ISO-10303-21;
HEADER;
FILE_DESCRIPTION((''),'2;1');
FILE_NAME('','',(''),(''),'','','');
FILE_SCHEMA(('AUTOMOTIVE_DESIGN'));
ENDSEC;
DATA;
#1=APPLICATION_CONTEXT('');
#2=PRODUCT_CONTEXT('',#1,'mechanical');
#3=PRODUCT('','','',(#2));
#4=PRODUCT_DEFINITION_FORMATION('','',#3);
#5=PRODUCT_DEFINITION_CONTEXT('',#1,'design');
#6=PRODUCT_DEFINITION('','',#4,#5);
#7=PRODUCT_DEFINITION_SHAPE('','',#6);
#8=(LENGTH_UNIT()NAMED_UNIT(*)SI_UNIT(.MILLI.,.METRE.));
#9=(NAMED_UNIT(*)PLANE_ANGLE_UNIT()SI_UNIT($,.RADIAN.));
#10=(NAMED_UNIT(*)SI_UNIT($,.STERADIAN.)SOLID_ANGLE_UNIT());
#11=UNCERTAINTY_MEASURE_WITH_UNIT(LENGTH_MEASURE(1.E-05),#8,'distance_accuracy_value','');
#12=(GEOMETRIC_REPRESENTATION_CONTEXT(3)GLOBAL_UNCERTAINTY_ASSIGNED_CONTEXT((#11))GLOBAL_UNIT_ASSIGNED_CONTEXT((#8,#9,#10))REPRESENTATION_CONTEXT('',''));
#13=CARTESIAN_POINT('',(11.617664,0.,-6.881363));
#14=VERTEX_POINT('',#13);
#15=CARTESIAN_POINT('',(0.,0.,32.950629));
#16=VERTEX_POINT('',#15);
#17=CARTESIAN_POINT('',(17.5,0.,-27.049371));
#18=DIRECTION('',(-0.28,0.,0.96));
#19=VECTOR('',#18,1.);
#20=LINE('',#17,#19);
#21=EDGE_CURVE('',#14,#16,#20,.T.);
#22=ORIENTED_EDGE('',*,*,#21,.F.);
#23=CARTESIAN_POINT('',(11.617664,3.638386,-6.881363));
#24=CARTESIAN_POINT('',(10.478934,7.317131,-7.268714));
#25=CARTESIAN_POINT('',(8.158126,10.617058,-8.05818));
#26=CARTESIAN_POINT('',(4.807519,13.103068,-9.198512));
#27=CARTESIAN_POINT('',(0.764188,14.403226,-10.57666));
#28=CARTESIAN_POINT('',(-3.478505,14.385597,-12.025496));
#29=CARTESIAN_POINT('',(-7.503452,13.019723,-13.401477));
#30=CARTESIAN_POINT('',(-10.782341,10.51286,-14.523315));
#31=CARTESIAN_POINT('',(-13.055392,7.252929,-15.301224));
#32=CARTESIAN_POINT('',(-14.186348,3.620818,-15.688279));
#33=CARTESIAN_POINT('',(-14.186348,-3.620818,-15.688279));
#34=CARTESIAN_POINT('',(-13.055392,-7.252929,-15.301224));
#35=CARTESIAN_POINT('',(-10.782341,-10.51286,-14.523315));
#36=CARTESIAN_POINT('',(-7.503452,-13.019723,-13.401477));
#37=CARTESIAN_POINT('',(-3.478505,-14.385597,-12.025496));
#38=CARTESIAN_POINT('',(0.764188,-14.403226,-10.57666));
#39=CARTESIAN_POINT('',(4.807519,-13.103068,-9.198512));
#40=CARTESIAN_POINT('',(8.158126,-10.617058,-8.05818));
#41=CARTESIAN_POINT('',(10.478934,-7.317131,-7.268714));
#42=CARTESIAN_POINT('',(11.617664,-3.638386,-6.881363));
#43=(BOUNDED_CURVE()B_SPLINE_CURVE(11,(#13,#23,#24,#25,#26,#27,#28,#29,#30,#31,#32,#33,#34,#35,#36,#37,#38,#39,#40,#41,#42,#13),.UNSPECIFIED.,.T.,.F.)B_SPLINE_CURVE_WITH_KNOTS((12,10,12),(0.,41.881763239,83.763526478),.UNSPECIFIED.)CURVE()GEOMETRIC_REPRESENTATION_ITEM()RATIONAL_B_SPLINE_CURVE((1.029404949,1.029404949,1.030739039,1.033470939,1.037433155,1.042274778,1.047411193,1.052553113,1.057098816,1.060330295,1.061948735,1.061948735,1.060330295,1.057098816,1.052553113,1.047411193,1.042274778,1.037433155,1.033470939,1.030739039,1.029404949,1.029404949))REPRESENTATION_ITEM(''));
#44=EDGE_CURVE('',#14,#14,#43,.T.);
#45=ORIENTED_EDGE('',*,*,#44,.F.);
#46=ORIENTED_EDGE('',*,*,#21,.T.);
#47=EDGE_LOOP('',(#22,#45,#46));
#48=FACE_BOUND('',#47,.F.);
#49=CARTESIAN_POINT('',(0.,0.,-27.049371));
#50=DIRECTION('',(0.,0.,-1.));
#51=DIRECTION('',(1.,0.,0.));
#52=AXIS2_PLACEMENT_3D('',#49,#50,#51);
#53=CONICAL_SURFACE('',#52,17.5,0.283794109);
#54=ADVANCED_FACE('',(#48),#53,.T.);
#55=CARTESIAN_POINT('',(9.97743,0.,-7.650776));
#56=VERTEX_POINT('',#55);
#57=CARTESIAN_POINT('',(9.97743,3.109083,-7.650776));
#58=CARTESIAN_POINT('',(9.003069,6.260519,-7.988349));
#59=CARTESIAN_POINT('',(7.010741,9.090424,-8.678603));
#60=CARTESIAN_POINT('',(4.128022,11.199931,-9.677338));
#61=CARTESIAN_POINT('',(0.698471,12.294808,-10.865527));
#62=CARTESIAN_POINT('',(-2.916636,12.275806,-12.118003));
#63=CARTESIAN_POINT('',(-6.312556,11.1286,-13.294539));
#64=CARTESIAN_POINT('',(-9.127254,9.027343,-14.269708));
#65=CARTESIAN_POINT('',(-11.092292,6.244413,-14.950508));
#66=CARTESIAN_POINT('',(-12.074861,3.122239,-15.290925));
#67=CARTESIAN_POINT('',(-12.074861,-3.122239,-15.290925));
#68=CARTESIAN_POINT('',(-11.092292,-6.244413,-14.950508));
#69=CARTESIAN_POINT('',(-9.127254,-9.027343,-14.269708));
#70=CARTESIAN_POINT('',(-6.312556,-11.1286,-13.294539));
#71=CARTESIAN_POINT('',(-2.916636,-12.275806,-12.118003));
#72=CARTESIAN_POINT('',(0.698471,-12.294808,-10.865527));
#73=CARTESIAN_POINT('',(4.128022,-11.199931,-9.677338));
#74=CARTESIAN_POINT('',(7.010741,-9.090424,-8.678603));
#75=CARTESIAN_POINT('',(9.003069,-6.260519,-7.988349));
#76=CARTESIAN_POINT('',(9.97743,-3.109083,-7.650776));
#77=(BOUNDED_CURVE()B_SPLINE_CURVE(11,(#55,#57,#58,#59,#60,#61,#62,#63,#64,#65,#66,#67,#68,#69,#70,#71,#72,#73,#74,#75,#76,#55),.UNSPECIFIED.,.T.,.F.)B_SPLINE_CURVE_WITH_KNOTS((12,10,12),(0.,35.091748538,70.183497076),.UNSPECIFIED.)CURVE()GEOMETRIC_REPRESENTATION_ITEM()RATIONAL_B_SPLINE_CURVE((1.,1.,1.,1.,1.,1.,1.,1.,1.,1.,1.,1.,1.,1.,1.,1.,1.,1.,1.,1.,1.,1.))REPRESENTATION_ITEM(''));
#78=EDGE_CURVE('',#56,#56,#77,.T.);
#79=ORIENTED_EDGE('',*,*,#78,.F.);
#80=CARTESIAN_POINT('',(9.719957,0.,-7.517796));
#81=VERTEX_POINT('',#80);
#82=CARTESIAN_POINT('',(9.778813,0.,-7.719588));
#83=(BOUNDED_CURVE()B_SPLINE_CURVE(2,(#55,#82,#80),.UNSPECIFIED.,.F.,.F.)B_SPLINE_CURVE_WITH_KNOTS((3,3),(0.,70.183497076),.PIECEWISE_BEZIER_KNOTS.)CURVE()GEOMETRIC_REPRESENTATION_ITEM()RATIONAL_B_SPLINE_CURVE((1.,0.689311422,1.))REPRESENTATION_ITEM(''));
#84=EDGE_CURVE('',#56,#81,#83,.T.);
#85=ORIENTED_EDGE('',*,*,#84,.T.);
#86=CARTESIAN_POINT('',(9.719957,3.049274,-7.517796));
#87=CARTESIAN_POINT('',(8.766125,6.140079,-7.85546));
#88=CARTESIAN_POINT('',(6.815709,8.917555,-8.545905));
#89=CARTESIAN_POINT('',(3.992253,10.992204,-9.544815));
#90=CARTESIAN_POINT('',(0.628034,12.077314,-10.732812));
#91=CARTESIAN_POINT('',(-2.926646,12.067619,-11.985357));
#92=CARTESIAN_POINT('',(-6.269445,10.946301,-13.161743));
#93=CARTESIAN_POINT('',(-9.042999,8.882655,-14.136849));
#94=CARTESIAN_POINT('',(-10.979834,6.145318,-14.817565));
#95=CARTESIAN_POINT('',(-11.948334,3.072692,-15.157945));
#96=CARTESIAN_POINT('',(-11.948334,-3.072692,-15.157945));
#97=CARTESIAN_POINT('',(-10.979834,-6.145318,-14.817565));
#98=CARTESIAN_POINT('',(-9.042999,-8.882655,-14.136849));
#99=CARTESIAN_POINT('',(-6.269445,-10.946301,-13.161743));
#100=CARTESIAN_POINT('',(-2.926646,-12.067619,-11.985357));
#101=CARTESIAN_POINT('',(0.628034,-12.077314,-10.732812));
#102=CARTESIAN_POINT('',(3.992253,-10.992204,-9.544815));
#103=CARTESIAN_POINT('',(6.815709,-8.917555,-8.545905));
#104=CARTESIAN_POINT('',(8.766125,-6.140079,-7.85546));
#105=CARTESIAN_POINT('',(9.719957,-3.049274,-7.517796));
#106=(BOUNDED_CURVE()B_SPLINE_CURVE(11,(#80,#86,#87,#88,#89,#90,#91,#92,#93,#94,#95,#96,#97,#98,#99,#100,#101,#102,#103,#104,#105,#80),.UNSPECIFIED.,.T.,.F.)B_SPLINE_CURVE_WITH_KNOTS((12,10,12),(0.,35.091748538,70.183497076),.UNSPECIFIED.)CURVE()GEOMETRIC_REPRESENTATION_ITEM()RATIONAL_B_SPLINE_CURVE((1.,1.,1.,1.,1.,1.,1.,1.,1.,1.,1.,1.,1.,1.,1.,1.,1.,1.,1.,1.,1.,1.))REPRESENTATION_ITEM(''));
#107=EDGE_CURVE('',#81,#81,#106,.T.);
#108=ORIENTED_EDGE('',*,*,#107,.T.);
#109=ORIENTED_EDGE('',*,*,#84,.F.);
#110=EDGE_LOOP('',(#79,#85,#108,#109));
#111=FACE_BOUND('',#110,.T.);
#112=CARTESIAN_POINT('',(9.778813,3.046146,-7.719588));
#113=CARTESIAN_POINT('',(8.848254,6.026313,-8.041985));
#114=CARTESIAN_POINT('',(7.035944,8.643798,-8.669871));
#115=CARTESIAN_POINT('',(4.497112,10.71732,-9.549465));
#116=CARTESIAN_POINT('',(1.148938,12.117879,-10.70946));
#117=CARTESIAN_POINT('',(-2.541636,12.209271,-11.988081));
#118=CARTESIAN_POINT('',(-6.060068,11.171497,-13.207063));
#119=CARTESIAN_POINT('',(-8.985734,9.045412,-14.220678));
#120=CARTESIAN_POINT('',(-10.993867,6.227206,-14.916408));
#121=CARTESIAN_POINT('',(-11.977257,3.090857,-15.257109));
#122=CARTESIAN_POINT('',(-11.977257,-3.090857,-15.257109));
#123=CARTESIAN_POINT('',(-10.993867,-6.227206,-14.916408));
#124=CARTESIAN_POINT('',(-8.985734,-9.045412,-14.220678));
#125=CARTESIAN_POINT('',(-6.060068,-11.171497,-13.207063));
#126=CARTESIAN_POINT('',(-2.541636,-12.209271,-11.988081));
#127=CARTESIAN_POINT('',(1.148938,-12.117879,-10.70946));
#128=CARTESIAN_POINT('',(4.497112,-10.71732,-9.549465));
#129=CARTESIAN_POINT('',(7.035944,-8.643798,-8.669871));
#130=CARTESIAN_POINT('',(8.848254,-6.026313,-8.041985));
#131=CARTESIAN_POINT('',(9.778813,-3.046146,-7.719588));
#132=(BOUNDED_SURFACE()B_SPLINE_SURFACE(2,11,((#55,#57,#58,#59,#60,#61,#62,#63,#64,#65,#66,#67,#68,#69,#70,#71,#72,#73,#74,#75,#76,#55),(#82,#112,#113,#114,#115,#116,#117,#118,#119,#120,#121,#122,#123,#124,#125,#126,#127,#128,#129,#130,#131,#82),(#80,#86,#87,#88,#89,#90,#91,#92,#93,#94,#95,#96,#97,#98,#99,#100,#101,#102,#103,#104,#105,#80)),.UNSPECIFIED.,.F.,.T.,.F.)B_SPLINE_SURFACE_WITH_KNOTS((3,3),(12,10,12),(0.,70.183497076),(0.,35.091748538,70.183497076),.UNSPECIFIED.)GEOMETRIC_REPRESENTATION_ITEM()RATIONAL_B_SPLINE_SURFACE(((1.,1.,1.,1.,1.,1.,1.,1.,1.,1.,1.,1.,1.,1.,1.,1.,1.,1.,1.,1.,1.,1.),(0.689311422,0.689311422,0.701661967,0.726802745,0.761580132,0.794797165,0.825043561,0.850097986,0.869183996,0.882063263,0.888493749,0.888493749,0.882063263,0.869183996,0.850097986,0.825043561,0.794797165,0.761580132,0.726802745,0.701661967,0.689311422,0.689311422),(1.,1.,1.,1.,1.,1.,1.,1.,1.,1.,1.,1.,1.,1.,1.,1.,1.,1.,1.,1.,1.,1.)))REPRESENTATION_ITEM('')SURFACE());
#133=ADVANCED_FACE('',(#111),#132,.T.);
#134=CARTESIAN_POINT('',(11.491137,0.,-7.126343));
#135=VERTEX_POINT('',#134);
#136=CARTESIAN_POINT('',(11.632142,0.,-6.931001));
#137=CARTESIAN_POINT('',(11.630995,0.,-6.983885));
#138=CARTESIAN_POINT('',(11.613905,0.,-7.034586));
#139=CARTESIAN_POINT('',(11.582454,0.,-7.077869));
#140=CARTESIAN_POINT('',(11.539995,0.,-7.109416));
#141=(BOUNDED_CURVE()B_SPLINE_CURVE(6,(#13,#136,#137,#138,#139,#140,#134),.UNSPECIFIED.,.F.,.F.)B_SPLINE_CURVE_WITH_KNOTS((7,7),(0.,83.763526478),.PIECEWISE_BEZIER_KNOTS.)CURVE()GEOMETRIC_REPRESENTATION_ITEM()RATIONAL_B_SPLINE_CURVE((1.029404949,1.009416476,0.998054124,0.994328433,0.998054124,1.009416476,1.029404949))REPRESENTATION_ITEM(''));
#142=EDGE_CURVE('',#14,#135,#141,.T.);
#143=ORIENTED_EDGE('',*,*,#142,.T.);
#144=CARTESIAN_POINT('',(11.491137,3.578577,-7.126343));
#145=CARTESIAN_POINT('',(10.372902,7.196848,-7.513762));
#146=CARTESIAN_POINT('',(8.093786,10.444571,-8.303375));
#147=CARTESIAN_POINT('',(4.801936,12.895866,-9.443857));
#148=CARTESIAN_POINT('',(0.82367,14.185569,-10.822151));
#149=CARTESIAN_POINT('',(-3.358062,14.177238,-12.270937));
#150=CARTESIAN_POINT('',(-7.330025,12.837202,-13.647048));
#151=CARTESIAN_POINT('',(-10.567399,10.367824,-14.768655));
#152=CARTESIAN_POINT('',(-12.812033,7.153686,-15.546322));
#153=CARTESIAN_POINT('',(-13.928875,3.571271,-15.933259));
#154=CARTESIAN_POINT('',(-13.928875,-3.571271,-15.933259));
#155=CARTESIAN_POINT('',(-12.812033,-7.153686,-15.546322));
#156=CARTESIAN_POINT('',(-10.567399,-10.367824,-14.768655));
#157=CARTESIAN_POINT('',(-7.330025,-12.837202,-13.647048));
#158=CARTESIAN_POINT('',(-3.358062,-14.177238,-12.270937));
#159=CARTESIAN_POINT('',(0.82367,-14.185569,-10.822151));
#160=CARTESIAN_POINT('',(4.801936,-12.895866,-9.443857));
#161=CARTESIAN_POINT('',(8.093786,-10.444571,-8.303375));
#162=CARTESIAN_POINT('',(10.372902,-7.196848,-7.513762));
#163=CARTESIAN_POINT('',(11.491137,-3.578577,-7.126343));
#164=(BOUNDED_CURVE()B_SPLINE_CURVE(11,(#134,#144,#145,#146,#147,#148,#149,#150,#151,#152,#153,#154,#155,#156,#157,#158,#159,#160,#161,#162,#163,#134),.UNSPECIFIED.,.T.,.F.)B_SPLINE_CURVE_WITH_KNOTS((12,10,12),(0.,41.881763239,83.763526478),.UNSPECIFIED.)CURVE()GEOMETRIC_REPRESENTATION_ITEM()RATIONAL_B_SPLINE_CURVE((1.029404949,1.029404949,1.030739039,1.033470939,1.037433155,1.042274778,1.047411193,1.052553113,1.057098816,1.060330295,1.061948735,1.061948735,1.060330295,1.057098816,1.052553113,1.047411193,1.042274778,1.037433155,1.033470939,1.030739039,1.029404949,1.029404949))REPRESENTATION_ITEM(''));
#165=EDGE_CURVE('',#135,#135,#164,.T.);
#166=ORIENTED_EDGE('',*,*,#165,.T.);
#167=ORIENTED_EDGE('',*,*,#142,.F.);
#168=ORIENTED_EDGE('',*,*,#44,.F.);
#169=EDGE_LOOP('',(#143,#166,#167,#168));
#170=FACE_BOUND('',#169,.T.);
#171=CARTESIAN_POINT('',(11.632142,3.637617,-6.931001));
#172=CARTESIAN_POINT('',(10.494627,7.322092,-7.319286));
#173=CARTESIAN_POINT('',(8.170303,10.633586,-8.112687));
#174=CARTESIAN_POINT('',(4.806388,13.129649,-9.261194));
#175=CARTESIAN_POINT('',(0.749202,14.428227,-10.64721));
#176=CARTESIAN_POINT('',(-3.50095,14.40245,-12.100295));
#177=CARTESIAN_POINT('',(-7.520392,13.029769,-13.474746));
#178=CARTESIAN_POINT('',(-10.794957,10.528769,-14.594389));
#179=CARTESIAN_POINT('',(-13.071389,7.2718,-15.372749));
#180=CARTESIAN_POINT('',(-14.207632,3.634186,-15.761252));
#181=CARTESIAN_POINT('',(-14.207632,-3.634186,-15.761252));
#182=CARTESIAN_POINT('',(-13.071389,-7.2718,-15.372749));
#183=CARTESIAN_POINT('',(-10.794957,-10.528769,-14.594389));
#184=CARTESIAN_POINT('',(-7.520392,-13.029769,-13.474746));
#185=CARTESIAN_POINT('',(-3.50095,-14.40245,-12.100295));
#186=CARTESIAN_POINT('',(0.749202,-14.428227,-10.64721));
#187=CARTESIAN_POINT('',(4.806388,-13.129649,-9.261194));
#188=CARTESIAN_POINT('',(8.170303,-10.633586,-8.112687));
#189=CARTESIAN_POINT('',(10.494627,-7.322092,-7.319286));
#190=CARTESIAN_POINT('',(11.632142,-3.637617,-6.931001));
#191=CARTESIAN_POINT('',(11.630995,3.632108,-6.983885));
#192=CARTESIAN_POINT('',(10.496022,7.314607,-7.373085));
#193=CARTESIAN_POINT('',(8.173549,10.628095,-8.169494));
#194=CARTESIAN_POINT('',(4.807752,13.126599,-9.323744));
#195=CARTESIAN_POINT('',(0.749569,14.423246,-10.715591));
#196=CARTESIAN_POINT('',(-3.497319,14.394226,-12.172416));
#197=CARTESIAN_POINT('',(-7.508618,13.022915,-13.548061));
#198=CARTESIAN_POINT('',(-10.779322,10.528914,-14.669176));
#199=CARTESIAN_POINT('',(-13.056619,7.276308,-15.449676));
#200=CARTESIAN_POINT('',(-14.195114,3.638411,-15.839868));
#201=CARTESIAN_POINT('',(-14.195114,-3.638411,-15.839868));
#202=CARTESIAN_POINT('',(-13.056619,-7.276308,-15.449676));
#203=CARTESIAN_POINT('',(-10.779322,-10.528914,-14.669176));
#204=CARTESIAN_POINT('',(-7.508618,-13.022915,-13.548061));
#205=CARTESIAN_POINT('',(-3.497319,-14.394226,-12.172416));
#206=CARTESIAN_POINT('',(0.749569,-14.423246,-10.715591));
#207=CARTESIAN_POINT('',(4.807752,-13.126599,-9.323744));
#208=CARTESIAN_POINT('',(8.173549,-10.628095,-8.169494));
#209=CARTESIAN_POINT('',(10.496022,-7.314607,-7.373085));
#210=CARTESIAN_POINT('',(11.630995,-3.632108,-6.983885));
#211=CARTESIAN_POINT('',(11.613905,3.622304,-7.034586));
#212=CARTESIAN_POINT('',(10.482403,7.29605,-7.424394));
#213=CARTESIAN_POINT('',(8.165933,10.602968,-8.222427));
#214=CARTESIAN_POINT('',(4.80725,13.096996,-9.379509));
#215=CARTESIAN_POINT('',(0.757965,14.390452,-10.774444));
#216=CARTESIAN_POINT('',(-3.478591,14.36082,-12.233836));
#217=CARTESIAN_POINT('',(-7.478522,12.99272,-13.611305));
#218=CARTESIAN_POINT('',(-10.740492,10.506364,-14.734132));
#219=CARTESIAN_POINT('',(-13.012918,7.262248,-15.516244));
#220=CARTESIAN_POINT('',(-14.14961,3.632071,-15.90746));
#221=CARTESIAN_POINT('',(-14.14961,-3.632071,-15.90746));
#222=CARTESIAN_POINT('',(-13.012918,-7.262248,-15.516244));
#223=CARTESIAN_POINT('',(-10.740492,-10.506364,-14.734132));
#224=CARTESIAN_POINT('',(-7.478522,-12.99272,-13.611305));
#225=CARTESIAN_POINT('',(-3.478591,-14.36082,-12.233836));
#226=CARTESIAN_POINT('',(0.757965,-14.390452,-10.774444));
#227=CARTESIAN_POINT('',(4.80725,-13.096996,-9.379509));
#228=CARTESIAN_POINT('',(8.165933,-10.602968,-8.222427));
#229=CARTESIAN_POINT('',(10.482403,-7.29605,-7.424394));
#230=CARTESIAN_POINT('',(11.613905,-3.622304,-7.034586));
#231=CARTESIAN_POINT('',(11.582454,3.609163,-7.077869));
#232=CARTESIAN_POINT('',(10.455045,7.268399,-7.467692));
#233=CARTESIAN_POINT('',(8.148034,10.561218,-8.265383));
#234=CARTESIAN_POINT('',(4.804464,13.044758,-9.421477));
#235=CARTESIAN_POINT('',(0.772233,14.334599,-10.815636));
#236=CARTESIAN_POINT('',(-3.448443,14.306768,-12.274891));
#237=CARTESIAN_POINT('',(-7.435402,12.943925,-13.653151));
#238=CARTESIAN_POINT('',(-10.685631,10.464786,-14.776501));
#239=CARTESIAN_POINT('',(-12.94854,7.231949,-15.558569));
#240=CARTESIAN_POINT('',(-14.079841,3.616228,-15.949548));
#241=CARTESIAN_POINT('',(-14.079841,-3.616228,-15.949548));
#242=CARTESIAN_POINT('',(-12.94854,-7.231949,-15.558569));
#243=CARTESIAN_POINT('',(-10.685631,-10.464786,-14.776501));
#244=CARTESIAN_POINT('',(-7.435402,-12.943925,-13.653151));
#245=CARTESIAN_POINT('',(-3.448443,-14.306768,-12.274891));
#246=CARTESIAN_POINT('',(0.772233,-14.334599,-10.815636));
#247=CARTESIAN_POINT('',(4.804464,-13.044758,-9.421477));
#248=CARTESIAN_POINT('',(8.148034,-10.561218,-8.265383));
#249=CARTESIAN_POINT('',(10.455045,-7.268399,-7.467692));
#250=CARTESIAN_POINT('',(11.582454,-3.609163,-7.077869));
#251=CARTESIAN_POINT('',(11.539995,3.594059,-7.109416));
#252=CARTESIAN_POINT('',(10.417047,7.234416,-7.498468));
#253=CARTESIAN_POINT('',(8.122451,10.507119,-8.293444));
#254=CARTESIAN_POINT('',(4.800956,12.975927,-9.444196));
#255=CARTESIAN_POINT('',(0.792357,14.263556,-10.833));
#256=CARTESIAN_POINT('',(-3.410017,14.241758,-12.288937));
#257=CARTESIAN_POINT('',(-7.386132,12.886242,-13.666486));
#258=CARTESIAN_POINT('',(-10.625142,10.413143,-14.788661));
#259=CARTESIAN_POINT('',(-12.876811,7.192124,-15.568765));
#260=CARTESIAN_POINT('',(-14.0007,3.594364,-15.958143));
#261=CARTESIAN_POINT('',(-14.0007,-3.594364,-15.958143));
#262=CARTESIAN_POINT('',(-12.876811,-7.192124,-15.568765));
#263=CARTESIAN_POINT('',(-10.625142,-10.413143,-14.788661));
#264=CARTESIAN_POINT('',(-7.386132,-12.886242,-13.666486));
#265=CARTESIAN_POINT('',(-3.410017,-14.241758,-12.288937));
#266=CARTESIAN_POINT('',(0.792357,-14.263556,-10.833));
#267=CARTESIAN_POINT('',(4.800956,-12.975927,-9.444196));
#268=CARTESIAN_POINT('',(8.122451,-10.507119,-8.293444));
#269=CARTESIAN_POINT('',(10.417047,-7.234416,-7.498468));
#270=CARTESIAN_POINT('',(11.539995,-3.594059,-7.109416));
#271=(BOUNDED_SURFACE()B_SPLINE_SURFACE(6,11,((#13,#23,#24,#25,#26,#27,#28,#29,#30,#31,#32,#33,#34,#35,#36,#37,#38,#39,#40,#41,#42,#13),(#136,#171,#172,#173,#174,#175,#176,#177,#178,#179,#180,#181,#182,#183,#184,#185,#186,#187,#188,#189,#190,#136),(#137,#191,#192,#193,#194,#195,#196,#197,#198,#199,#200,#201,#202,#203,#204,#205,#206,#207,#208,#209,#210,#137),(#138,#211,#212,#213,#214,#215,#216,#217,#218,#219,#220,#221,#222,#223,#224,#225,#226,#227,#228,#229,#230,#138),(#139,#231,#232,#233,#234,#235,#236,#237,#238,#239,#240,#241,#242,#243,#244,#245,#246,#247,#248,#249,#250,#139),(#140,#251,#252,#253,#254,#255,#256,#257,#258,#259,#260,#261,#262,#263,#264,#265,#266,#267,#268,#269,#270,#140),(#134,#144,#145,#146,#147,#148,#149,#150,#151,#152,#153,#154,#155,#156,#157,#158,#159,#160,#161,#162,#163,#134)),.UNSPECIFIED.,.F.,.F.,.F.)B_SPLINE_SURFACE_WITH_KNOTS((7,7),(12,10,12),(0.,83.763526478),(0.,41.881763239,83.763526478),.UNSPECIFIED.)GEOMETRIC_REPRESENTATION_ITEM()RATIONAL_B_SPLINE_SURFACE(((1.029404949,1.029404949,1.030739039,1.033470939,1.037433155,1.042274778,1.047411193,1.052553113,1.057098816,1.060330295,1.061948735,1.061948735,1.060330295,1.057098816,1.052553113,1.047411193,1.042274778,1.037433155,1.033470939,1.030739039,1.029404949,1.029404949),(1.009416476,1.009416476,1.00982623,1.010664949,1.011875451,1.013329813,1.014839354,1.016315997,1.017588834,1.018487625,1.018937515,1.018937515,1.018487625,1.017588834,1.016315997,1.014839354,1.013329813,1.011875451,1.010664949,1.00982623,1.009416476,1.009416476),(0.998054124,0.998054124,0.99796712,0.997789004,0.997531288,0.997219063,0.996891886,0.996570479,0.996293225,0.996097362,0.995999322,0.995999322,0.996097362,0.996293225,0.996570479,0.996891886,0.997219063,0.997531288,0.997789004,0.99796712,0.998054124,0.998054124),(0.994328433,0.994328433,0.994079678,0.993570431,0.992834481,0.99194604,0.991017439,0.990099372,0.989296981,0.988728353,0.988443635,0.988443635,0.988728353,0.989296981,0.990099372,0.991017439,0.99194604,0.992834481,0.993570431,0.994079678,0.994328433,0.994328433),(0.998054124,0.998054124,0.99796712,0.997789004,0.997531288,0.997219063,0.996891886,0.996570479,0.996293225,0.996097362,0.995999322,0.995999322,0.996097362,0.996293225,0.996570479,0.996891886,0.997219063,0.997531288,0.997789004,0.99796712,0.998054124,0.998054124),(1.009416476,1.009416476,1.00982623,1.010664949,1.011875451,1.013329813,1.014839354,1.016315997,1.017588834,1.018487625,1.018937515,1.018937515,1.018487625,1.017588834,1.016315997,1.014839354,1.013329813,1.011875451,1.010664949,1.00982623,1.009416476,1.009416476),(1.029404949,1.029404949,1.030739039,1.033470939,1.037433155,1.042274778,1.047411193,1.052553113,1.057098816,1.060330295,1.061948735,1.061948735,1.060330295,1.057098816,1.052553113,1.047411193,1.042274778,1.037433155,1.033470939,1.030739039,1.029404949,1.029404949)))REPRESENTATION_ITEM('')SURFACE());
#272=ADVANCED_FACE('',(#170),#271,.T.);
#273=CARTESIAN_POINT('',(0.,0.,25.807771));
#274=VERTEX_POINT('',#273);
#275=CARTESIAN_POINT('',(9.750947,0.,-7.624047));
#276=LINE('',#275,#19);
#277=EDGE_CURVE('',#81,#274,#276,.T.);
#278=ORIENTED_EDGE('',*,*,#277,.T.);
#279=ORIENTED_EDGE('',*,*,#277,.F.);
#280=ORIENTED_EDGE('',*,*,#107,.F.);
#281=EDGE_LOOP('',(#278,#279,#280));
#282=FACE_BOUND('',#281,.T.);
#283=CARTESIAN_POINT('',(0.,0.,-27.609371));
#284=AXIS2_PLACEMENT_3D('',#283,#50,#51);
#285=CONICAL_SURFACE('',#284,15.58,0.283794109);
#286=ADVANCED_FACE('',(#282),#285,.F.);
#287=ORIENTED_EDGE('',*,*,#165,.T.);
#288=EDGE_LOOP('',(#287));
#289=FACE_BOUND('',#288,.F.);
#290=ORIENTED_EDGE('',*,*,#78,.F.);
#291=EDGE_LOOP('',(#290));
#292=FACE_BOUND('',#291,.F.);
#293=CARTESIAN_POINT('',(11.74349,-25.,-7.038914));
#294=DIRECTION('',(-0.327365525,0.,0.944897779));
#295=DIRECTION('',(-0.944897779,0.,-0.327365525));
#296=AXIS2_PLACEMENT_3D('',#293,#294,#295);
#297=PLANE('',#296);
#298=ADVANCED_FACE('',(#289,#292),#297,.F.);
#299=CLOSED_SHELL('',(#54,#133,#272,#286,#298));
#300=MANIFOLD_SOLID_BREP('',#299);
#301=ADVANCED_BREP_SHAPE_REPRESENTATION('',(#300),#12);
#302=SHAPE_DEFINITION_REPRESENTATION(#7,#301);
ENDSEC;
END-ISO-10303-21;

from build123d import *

# Parameters (mm, degrees)
F2_R     = 1.5
F5_DEPTH = 55.3
F6_T     = -2
F8_R     = 0.2


# Not quite as in the source:
# - a feature of the source that left no trace in its solid (it failed there, or was rolled back) is left out


with BuildPart() as f1:
    # F0 (on Front) → F1 (revolve)
    with BuildSketch(Plane.XZ):
        Polygon((0, 32.9506285489), (0, -27.0493714511), (17.5, -27.0493714511), align=None)
    revolve(axis=Axis((0, 0, 2.9506285489), (0, 0, -1)))

    # F2
    f2_edges = [f1.edges().sort_by_distance(p)[0] for p in [
        (-17.5, 0, -27.049371),
    ]]
    fillet(f2_edges, radius=F2_R)

    # F4 (on offset) → F5 (cut)
    with BuildSketch(Plane.XZ.offset(25)):
        Polygon((11.7434896529, -7.0389136672), (-14.4568033888, -16.1161629583), (-22.2343672067, -16.070589817), (-22.2343672067, -30.6586939842), (20.5961283824, -30.6586939842), (20.5961283824, -7.1517258466), align=None)
    extrude(amount=-F5_DEPTH, mode=Mode.SUBTRACT)

    # F6
    f6_openings = [f1.faces().sort_by_distance(p)[0] for p in [
        (-1.311914, 0, -11.562037),
    ]]
    offset(amount=F6_T, openings=f6_openings)

    # F8
    f8_edges = [f1.edges().sort_by_distance(p)[0] for p in [
        (-14.294775, 0, -16.060027),
        (-11.977257, 0, -15.257109),
    ]]
    fillet(f8_edges, radius=F8_R)


solid = f1.part
